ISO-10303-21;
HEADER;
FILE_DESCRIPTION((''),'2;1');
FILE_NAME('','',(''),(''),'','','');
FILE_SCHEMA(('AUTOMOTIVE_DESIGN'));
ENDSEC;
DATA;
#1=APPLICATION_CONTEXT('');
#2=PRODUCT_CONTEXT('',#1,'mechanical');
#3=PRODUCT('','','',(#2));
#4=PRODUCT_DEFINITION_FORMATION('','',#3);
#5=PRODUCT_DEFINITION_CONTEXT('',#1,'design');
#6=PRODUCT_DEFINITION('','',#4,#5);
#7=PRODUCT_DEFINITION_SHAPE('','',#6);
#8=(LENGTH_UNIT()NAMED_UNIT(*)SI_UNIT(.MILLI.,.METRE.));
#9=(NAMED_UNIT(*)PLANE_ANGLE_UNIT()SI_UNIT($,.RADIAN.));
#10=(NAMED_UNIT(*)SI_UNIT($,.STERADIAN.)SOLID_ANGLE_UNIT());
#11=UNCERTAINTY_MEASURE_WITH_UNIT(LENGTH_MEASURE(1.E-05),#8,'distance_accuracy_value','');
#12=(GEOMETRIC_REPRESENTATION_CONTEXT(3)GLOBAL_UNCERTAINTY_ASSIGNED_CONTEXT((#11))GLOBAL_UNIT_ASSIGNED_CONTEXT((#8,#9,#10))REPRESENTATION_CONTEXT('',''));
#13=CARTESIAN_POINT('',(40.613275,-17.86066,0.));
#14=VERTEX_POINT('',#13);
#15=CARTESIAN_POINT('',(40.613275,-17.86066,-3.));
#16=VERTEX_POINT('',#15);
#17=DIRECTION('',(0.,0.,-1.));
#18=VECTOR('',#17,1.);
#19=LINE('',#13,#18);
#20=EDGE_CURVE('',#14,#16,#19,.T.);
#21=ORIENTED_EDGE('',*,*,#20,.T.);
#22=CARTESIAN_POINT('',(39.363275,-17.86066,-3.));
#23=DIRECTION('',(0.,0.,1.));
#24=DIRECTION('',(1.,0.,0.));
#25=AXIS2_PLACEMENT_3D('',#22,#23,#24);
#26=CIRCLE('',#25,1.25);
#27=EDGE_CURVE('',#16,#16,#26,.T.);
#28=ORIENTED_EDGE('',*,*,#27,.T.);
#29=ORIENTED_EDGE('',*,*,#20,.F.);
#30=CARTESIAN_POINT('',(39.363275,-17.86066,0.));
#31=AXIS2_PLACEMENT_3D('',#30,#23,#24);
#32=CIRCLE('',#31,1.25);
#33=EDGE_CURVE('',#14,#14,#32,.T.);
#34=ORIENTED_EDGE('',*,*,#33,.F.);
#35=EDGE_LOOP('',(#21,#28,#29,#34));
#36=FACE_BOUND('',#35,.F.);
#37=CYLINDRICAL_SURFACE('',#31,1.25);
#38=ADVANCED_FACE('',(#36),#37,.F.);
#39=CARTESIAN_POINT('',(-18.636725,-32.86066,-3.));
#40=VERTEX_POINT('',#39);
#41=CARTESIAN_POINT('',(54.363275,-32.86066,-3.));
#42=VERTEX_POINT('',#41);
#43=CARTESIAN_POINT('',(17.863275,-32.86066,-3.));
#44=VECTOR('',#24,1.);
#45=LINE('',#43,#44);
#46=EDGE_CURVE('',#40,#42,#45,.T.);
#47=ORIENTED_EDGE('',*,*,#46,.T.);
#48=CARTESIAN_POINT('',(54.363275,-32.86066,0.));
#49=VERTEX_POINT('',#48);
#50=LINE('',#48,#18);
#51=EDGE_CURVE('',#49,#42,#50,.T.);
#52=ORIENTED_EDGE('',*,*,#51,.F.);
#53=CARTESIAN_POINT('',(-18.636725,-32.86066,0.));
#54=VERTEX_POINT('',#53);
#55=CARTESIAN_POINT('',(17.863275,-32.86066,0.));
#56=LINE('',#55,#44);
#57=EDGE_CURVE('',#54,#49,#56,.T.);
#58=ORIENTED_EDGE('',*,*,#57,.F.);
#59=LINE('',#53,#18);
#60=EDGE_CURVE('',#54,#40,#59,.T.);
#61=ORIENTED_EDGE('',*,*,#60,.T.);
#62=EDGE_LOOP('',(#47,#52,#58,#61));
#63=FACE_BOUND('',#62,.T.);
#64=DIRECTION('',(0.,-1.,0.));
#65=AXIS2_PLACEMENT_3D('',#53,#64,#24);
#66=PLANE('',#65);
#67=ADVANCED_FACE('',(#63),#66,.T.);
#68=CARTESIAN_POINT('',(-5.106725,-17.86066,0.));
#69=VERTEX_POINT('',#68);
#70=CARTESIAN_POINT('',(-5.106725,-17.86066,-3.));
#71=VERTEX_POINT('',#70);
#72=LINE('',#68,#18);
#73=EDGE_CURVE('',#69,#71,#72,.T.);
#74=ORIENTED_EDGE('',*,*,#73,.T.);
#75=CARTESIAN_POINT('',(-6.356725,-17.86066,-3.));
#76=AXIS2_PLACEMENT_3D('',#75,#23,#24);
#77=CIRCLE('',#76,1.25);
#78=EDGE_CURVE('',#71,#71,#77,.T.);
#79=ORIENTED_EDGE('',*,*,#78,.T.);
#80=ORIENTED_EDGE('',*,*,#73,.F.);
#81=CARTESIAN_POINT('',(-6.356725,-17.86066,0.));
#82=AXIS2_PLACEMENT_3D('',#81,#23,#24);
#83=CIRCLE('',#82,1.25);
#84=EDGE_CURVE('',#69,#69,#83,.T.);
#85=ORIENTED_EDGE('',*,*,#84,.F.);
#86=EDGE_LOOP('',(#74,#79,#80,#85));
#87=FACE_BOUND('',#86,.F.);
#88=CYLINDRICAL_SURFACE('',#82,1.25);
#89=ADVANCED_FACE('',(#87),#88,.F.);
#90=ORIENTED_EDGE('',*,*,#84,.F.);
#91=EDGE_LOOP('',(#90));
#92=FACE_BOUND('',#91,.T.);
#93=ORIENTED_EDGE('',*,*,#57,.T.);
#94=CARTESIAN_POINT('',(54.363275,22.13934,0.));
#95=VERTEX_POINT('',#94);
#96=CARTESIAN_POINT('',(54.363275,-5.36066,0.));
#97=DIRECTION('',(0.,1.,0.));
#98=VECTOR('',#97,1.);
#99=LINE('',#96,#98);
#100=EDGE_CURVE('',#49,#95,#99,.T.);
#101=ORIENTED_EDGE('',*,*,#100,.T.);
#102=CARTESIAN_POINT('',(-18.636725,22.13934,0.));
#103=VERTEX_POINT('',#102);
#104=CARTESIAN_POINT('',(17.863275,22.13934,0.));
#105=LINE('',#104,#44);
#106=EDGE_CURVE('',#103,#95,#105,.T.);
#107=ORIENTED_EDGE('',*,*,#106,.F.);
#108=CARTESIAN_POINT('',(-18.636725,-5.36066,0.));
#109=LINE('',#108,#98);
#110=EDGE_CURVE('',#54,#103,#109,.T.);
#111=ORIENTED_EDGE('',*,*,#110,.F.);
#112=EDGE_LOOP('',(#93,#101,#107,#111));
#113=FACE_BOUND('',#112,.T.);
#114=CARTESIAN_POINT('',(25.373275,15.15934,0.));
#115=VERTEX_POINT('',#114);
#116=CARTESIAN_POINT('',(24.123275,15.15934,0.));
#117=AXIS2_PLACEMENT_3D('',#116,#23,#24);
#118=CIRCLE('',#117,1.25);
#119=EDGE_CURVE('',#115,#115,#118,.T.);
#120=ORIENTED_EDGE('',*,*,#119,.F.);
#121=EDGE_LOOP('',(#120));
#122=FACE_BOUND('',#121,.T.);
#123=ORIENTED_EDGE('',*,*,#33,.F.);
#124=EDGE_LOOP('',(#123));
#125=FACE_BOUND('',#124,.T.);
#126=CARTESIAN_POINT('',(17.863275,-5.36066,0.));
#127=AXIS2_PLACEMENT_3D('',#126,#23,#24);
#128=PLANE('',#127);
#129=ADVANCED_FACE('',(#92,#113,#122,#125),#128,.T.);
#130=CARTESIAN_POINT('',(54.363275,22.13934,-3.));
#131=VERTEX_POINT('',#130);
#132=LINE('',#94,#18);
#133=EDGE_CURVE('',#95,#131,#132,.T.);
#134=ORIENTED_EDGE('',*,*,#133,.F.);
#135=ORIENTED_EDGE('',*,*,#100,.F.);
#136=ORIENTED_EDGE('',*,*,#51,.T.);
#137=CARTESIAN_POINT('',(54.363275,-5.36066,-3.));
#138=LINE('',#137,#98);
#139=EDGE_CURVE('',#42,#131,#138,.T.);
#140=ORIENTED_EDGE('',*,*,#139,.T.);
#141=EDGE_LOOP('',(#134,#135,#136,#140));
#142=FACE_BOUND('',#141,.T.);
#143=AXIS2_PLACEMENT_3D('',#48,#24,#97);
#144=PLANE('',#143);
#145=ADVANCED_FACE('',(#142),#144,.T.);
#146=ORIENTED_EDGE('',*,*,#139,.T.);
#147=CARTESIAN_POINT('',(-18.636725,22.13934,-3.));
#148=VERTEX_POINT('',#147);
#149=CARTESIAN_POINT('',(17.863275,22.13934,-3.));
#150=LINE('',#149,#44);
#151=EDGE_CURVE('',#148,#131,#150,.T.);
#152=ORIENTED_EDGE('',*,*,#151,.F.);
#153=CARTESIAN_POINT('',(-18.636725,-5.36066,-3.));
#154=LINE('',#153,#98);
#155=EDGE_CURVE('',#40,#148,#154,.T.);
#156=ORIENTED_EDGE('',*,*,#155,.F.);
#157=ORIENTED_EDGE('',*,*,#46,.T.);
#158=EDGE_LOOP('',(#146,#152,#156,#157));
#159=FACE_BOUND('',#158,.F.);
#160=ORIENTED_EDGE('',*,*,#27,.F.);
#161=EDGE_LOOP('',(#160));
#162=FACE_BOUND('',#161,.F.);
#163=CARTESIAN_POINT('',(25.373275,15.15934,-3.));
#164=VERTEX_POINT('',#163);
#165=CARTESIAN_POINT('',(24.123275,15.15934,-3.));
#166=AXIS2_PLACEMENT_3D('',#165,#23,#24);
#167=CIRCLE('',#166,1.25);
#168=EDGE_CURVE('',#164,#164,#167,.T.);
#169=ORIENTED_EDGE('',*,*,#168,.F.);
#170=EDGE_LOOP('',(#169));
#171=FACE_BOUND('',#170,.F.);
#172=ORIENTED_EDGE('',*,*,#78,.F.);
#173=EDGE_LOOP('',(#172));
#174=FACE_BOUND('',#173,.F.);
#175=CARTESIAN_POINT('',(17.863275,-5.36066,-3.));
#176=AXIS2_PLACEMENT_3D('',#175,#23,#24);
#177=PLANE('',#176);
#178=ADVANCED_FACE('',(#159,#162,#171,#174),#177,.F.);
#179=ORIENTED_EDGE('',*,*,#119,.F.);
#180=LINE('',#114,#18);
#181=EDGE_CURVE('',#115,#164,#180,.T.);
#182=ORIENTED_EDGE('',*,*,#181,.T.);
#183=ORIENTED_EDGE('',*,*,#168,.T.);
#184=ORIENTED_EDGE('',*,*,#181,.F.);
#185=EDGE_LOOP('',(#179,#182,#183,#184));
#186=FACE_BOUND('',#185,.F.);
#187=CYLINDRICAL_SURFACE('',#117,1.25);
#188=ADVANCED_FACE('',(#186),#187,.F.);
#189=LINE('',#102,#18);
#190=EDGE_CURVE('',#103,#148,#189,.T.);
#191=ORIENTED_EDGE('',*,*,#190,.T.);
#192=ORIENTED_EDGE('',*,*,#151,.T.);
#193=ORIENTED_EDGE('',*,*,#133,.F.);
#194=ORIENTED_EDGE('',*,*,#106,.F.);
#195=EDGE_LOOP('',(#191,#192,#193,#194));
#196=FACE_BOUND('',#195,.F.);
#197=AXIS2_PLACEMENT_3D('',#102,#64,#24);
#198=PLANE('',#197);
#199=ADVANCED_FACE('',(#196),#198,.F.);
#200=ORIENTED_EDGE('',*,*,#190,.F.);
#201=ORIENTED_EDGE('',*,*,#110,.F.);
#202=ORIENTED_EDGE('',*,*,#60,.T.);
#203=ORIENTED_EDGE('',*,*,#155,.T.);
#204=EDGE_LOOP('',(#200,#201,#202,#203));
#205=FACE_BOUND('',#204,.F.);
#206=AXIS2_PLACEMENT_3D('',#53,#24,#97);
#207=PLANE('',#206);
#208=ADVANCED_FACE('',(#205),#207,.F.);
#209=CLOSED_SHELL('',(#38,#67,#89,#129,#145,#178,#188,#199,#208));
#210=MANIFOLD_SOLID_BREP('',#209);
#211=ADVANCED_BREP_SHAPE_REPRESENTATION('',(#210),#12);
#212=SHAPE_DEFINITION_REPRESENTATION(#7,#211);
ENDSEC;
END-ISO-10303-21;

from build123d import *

# Parameters (mm, degrees)
F0_W     = 73
F0_H     = 55
F0_R     = 3.5
F0_R_2   = 1.25
F1_DEPTH = 3


# Not quite as in the source:
# - a feature names something its author has since deleted; it is built from what else it names


with BuildPart() as f1:
    # F0 (on Top) → F1 (new body)
    with BuildSketch(Plane.XY):
        with Locations((17.8632747996, -5.3606596088)):
            Rectangle(F0_W, F0_H)
        with Locations((-6.3567252004, -17.8606596088)):
            Circle(F0_R, mode=Mode.SUBTRACT)
        with BuildLine():
            ThreePointArc((39.3632747996, -14.3606596088), (41.8381485337, -15.3857858747), (42.8632747996, -17.8606596088))
            ThreePointArc((42.8632747996, -17.8606596088), (41.8381485337, -20.335533343), (39.3632747996, -21.3606596088))
            ThreePointArc((39.3632747996, -21.3606596088), (35.8632747996, -17.8606596088), (39.3632747996, -14.3606596088))
        make_face(mode=Mode.SUBTRACT)
        with Locations((24.1232747996, 15.1593403912)):
            Circle(F0_R, mode=Mode.SUBTRACT)
        with Locations((24.1232747996, 15.1593403912)):
            Circle(F0_R)
        with Locations((24.1232747996, 15.1593403912)):
            Circle(F0_R_2, mode=Mode.SUBTRACT)
        with BuildLine():
            ThreePointArc((39.3632747996, -21.3606596088), (41.8381485337, -20.335533343), (42.8632747996, -17.8606596088))
            ThreePointArc((42.8632747996, -17.8606596088), (41.8381485337, -15.3857858747), (39.3632747996, -14.3606596088))
            ThreePointArc((39.3632747996, -14.3606596088), (35.8632747996, -17.8606596088), (39.3632747996, -21.3606596088))
        make_face()
        with Locations((39.3632747996, -17.8606596088)):
            Circle(F0_R_2, mode=Mode.SUBTRACT)
        with Locations((-6.3567252004, -17.8606596088)):
            Circle(F0_R)
        with Locations((-6.3567252004, -17.8606596088)):
            Circle(F0_R_2, mode=Mode.SUBTRACT)
    extrude(amount=-F1_DEPTH)


solid = f1.part
